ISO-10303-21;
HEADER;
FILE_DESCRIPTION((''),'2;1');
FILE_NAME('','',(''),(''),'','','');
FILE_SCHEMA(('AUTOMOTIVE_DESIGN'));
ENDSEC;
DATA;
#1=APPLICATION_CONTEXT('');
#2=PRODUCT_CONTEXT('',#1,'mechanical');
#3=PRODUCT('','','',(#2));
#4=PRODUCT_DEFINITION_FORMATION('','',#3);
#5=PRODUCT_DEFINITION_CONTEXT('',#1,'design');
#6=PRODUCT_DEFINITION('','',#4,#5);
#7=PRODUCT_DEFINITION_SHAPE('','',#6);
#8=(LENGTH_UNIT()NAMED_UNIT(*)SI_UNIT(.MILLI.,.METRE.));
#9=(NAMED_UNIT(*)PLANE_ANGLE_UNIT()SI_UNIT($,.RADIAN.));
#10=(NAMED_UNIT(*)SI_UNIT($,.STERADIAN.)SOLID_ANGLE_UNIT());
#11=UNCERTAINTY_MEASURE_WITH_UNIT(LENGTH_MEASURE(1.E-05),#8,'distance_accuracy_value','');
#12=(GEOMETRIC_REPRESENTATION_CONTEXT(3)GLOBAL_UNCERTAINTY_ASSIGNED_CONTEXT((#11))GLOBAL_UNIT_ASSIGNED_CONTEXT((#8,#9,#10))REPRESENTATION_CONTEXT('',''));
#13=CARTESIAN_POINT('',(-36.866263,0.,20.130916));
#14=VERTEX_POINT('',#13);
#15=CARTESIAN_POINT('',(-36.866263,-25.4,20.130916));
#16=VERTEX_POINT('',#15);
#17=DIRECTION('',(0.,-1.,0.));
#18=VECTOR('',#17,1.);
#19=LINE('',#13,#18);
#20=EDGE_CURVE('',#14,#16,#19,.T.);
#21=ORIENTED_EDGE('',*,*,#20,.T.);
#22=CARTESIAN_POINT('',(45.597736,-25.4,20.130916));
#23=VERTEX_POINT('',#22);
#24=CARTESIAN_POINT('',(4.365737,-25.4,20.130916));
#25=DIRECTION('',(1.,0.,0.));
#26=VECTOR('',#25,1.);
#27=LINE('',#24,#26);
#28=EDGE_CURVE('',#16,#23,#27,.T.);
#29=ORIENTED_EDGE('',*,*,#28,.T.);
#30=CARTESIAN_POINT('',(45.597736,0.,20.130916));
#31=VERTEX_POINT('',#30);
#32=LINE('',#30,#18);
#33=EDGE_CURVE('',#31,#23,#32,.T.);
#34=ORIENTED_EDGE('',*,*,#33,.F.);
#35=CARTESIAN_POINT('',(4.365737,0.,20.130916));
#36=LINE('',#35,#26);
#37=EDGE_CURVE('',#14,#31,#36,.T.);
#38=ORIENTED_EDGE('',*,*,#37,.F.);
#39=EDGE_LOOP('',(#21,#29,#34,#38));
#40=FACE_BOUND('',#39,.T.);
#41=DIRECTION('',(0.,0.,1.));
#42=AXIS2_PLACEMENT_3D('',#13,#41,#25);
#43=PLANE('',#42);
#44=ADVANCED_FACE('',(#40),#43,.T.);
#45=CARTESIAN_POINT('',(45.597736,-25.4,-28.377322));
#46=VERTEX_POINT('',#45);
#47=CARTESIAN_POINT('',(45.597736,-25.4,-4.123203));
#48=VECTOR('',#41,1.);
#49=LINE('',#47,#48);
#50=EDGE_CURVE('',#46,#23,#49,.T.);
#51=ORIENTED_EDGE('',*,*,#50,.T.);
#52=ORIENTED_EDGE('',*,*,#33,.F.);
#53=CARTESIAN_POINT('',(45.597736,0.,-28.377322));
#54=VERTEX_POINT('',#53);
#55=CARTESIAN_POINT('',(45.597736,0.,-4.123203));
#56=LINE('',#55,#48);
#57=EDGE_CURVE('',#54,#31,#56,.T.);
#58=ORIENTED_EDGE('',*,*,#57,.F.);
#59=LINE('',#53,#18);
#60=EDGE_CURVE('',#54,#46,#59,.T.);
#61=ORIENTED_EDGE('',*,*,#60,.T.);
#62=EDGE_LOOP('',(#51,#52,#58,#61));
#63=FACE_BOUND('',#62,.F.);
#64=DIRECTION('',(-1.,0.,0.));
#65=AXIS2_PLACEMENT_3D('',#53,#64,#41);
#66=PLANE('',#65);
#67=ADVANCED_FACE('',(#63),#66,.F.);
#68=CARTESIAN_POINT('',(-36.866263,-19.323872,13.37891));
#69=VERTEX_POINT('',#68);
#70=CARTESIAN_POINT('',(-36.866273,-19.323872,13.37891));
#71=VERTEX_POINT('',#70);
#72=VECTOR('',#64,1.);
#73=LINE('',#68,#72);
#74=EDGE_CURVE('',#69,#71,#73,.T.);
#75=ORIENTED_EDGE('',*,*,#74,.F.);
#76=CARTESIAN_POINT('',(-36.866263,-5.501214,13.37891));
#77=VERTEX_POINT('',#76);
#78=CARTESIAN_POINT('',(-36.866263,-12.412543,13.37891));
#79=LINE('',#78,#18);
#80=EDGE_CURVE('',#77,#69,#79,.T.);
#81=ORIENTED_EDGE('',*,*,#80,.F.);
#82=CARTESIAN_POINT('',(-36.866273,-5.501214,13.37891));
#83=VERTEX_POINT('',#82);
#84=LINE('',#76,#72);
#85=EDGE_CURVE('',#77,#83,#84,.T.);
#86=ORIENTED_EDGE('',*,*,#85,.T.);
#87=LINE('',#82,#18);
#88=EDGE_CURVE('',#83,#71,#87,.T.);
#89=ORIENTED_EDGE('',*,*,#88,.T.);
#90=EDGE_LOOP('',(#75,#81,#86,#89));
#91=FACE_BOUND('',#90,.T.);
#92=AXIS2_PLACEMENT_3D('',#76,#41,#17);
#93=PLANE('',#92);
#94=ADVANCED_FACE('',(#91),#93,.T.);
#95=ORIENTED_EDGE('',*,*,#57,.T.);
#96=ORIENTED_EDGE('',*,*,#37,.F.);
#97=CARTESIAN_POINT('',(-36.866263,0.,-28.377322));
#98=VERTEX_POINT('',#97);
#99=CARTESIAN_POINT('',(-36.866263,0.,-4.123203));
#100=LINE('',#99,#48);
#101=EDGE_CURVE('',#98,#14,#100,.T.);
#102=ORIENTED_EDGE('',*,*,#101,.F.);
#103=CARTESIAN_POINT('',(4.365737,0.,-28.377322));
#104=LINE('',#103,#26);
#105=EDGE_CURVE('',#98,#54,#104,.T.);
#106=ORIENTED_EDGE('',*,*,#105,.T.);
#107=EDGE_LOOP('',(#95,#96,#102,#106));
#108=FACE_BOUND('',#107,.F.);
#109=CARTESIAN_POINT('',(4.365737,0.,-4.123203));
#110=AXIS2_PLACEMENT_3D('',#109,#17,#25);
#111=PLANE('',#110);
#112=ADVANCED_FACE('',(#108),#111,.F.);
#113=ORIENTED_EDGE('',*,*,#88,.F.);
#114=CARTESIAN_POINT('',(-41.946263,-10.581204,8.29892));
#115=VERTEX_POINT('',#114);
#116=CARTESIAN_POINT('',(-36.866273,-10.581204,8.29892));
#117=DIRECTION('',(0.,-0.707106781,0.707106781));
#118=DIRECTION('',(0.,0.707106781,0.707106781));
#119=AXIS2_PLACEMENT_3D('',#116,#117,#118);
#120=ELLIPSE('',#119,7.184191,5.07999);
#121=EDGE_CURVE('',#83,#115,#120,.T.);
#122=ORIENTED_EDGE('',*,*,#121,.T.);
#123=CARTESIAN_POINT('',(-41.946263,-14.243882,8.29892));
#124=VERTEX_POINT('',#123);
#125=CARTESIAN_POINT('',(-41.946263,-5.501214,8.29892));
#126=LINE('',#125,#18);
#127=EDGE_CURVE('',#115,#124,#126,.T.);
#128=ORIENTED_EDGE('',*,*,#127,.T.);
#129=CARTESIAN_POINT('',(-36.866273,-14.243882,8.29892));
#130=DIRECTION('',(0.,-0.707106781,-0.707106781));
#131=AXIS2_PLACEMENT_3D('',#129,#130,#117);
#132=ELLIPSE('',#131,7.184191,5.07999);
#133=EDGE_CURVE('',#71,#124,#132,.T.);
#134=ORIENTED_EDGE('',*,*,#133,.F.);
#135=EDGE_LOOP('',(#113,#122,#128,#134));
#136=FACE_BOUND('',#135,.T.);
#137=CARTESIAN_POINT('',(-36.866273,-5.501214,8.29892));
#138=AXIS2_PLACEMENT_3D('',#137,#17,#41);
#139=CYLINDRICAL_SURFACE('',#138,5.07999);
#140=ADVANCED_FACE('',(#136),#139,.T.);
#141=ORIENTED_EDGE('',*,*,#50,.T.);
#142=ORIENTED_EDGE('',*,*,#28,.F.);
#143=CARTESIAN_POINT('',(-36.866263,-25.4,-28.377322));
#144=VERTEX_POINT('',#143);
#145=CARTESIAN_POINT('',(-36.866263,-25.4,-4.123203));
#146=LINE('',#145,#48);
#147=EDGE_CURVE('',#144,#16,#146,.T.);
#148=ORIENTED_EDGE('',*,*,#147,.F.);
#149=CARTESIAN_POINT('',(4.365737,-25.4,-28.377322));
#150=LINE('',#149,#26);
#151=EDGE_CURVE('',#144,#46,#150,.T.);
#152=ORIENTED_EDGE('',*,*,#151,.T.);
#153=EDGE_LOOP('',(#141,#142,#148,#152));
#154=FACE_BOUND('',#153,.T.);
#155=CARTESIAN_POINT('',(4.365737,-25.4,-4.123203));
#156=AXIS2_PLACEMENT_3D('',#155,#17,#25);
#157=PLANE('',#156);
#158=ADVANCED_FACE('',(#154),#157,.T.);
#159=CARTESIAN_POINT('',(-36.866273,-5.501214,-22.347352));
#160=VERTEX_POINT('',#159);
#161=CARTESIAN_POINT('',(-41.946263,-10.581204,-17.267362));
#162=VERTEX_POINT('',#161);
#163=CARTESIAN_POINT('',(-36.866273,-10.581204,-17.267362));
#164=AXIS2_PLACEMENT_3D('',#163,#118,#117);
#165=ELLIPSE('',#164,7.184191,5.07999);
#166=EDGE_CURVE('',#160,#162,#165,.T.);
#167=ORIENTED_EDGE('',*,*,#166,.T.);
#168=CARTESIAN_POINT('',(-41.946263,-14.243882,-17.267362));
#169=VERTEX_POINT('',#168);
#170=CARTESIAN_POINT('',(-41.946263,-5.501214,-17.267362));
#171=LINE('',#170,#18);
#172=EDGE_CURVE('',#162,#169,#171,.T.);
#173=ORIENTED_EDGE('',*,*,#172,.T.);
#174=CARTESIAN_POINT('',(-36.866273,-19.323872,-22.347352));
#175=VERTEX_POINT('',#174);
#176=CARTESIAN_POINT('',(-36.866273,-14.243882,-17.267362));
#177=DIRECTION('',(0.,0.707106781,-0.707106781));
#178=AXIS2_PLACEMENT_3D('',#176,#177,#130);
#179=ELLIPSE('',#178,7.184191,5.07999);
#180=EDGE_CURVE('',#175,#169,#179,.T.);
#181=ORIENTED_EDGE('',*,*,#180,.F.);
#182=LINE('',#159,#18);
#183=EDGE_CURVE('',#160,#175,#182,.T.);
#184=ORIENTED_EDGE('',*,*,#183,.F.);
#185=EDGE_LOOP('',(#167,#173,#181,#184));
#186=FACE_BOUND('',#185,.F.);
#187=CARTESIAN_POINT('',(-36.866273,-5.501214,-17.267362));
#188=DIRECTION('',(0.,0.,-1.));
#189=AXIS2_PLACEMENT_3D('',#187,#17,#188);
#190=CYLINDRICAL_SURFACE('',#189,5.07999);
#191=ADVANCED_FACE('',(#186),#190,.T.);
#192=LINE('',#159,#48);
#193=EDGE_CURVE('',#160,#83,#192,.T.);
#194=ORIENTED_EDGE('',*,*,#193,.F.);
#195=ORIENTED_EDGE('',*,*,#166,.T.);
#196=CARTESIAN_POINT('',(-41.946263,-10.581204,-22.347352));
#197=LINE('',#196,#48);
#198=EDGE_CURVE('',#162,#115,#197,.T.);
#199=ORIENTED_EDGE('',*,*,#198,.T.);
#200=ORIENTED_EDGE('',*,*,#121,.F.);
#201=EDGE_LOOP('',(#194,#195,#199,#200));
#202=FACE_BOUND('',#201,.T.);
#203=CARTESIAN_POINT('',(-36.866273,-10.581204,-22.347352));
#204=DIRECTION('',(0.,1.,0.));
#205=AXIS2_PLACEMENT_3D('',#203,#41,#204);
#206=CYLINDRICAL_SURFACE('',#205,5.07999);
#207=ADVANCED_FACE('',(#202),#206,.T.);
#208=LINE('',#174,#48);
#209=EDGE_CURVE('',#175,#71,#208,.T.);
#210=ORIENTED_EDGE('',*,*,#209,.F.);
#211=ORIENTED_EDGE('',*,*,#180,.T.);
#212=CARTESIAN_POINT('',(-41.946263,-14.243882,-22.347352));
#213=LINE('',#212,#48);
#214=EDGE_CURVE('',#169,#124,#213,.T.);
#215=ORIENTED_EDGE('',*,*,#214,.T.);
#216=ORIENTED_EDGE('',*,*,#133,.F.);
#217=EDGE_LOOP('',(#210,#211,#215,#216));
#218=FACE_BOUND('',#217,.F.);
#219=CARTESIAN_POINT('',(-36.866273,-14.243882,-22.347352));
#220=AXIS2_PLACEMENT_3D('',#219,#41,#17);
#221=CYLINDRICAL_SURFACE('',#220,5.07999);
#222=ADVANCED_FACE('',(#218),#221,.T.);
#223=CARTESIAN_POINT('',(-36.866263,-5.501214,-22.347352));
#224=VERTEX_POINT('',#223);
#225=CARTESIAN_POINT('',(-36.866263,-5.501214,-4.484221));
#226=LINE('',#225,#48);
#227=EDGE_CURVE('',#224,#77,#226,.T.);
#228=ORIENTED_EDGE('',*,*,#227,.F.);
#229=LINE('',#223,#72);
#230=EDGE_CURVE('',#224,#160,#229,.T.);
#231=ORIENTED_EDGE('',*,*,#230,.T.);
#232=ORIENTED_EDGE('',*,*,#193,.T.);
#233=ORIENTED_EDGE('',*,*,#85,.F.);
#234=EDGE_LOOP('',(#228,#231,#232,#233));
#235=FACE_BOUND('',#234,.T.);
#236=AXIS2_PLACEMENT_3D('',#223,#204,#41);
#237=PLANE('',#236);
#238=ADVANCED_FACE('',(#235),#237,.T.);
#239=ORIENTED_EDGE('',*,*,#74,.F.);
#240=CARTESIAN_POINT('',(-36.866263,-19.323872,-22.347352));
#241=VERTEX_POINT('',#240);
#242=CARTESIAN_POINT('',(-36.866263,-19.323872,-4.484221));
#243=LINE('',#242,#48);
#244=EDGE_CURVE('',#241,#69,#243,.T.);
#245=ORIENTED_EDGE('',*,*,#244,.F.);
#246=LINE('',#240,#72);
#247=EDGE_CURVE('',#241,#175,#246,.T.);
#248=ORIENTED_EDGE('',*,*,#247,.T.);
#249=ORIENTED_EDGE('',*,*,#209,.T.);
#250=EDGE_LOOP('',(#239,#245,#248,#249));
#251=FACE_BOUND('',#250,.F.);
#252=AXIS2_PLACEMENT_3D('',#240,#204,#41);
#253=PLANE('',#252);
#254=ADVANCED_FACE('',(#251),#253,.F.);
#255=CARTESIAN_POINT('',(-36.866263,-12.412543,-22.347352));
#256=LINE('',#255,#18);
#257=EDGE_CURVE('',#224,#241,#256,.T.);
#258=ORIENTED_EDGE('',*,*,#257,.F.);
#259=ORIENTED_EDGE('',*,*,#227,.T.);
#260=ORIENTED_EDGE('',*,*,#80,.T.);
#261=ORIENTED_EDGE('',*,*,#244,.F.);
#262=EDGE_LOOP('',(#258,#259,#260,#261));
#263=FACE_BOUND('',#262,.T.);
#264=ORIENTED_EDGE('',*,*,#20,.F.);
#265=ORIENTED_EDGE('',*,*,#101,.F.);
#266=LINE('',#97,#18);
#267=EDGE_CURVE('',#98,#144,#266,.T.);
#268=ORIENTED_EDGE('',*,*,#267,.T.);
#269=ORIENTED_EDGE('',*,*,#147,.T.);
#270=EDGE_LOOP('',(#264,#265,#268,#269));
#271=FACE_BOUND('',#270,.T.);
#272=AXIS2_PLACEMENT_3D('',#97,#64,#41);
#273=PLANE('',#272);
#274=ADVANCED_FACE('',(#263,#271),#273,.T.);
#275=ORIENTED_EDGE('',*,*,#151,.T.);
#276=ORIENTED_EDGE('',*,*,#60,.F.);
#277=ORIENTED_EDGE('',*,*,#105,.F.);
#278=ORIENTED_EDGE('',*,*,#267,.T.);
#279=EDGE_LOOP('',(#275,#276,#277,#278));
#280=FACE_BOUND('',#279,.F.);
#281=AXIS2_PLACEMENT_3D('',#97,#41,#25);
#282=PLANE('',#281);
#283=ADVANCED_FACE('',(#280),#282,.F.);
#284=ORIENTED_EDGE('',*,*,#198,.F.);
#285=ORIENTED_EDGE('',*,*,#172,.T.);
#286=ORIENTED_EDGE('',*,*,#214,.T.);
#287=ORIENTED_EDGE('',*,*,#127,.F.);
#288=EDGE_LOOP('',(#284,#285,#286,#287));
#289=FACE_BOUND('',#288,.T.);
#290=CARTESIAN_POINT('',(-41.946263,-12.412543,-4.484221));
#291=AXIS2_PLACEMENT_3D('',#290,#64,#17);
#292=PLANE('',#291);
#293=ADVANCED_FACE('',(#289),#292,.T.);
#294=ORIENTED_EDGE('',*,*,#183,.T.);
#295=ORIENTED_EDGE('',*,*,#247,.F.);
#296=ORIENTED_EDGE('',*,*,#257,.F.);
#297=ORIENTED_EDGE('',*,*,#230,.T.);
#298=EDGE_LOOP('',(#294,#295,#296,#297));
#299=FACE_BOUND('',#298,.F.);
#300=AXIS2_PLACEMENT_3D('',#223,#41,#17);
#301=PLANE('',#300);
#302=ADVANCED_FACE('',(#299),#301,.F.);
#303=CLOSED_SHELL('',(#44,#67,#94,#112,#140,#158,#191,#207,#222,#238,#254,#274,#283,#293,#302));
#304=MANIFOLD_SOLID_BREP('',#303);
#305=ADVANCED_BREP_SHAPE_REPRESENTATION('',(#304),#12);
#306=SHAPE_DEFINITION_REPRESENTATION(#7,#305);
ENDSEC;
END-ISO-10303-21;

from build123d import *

# Parameters (mm, degrees)
F0_W     = 82.4639983475
F0_H     = 48.5082380474
F1_DEPTH = 25.4
F2_W     = 13.8226579875
F2_H     = 35.7262613252
F3_DEPTH = 5.08
F4_R     = 5.07999


# Not quite as in the source:
# - a fillet or chamfer is up to 0.001 mm smaller than in the source, because OpenCascade refuses the exact size


with BuildPart() as f1:
    # F0 (on Front) → F1 (new body)
    with BuildSketch(Plane.XZ):
        with Locations((4.3657366186, -4.1232034564)):
            Rectangle(F0_W, F0_H)
    extrude(amount=F1_DEPTH)

    # F2 (on face) → F3 (join)
    with BuildSketch(Plane(origin=(-36.8662625551, 0, 0), x_dir=(0, -1, 0), z_dir=(-1, 0, 0))):
        with Locations((12.4125434086, -4.4842208736)):
            Rectangle(F2_W, F2_H)
    extrude(amount=F3_DEPTH)

    # F4 (radius 5.08 in the source; OpenCascade refuses exactly that, so slightly less here)
    f4_edges = [f1.edges().sort_by_distance(p)[0] for p in [
        (-41.946263, -12.412543, -22.347352),
        (-41.946263, -5.501214, -4.484221),
        (-41.946263, -19.323872, -4.484221),
        (-41.946263, -12.412543, 13.37891),
    ]]
    fillet(f4_edges, radius=F4_R)


solid = f1.part
